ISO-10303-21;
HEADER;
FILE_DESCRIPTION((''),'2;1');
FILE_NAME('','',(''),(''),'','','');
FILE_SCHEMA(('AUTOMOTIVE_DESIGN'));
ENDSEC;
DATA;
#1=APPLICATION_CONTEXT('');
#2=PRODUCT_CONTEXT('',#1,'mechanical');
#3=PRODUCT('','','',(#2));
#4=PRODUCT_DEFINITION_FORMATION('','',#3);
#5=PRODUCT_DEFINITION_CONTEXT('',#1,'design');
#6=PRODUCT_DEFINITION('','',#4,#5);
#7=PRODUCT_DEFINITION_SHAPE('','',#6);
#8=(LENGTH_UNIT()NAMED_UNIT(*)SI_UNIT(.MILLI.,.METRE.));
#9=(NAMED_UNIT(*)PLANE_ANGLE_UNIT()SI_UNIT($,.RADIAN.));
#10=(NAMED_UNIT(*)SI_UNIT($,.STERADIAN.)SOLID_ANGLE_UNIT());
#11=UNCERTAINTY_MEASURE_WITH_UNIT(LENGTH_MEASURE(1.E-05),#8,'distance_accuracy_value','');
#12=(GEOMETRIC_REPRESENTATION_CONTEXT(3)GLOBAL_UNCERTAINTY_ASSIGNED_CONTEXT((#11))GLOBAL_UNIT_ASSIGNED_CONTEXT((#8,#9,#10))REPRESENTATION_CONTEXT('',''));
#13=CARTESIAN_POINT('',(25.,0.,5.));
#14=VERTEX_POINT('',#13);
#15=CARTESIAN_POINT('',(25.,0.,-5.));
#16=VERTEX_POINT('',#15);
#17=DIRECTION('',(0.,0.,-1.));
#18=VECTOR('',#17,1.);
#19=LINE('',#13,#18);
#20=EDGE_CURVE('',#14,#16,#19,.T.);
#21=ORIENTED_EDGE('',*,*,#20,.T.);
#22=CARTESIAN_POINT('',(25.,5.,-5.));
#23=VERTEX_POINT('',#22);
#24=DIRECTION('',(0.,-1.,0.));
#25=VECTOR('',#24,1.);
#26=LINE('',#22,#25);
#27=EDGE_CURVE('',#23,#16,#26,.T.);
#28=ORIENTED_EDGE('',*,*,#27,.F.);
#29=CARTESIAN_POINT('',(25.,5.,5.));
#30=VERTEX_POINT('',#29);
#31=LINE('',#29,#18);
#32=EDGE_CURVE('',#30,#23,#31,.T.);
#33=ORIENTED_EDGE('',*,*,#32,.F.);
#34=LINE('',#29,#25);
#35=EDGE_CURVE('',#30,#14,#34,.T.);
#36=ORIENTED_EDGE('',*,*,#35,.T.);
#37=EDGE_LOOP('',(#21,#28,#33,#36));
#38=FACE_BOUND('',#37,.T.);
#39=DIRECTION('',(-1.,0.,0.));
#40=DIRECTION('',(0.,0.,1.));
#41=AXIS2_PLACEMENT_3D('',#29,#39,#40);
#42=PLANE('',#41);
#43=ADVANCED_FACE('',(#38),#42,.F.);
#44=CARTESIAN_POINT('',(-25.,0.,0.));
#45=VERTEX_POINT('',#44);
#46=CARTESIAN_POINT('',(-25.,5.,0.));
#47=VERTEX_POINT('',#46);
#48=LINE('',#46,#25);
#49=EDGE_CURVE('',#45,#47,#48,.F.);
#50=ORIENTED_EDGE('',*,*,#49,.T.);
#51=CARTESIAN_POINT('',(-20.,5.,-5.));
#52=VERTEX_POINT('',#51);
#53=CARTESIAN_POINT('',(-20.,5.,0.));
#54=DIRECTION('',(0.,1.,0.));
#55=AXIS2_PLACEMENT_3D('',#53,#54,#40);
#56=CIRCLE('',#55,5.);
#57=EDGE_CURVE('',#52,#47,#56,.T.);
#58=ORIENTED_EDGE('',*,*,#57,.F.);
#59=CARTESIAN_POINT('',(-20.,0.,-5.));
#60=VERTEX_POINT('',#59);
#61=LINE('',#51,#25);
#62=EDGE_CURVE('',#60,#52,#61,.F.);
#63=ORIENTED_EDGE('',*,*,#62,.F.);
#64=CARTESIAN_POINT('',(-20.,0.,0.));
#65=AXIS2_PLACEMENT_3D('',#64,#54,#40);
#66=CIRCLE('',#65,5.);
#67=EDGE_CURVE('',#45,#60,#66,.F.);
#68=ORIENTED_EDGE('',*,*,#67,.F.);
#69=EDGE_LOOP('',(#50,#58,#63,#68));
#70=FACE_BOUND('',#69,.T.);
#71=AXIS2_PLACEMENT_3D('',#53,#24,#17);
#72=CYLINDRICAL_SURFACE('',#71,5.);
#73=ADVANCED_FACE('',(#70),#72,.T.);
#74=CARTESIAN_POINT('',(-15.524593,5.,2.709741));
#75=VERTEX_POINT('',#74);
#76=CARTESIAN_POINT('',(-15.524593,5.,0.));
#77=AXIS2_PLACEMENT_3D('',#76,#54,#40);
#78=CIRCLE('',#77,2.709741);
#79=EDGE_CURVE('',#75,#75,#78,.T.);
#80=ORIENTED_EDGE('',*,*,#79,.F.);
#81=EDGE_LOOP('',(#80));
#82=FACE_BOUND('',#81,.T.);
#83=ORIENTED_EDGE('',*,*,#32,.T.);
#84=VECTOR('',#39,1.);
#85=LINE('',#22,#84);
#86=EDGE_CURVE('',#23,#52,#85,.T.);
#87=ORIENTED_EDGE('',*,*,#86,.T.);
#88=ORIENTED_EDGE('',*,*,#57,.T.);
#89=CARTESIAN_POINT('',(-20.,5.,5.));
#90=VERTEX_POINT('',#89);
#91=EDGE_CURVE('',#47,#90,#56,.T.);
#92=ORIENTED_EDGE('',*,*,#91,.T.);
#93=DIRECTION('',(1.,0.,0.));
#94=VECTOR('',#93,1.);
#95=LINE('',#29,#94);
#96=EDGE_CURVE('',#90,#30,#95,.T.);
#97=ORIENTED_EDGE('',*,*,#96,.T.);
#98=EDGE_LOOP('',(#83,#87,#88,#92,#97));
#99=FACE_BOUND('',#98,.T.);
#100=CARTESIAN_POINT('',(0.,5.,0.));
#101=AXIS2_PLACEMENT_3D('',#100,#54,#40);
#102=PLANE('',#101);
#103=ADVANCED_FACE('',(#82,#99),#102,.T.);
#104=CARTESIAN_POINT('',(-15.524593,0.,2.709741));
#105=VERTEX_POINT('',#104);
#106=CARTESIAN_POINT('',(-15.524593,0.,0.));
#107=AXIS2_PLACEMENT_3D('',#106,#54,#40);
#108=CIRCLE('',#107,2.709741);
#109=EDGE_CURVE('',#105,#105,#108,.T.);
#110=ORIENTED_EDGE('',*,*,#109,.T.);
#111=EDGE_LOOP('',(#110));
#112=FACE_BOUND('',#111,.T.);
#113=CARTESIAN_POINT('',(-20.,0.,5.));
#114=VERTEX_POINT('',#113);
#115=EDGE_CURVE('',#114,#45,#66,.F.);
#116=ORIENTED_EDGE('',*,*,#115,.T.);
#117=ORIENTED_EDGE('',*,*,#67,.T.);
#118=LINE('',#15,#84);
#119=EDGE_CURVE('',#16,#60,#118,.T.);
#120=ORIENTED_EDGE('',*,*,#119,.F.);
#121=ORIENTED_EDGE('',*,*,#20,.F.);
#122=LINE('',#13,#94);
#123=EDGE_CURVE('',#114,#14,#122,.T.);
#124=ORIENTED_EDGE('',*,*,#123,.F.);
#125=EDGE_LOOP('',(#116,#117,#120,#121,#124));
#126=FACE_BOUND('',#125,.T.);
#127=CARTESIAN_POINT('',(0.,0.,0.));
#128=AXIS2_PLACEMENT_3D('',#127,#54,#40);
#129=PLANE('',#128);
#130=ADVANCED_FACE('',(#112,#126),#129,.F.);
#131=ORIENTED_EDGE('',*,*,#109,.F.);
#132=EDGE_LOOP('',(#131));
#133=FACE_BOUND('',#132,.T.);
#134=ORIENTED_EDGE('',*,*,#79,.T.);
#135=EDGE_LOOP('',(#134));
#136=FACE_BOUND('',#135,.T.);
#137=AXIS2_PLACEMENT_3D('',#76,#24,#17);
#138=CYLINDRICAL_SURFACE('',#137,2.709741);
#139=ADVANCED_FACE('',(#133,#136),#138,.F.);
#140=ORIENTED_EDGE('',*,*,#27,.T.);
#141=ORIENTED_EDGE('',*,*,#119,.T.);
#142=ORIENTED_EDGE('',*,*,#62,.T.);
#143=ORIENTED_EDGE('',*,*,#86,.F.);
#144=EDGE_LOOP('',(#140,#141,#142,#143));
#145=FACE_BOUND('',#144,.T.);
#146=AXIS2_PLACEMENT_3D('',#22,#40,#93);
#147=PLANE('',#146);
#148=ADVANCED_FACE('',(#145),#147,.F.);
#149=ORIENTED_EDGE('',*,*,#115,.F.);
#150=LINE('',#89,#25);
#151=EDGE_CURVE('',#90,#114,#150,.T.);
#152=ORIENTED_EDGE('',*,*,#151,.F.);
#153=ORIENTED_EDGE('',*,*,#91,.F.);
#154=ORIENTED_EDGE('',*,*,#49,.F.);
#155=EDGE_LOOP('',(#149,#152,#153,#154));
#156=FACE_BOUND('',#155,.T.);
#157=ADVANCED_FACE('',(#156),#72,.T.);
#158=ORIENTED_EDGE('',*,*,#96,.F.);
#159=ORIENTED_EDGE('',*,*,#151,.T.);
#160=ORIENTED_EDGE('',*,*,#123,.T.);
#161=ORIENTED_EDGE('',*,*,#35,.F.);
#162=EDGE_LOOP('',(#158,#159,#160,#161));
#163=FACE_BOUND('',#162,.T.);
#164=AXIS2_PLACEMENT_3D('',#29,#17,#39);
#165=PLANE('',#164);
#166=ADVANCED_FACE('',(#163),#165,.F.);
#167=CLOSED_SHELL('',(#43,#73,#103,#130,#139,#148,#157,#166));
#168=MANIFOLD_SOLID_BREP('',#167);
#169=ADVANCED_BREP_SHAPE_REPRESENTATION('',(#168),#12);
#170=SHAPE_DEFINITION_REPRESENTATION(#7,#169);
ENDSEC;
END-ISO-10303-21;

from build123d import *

# Parameters (mm, degrees)
SKETCH1_W           = 50
SKETCH1_H           = 10
SKETCH1_R           = 2.709740506
BOSS_EXTRUDE2_DEPTH = 5
FILLET1_R           = 5


with BuildPart() as part:
    # Sketch1 → Boss-Extrude2 (new body)
    with BuildSketch(Plane(origin=(0, 0, 0), x_dir=(1, 0, 0), z_dir=(0, 1, 0))):
        Rectangle(SKETCH1_W, SKETCH1_H)
        with Locations(Location((-15.524592929, 0, 0), (0, 0, 270))):
            Circle(SKETCH1_R, mode=Mode.SUBTRACT)
    extrude(amount=BOSS_EXTRUDE2_DEPTH)

    # Fillet1
    fillet1_edges = [part.edges().sort_by_distance(p)[0] for p in [
        (-25, 2.5, -5),
        (-25, 2.5, 5),
    ]]
    fillet(fillet1_edges, radius=FILLET1_R - 0.0001)  # a hair under: the kernel refuses the full size


solid = part.part
